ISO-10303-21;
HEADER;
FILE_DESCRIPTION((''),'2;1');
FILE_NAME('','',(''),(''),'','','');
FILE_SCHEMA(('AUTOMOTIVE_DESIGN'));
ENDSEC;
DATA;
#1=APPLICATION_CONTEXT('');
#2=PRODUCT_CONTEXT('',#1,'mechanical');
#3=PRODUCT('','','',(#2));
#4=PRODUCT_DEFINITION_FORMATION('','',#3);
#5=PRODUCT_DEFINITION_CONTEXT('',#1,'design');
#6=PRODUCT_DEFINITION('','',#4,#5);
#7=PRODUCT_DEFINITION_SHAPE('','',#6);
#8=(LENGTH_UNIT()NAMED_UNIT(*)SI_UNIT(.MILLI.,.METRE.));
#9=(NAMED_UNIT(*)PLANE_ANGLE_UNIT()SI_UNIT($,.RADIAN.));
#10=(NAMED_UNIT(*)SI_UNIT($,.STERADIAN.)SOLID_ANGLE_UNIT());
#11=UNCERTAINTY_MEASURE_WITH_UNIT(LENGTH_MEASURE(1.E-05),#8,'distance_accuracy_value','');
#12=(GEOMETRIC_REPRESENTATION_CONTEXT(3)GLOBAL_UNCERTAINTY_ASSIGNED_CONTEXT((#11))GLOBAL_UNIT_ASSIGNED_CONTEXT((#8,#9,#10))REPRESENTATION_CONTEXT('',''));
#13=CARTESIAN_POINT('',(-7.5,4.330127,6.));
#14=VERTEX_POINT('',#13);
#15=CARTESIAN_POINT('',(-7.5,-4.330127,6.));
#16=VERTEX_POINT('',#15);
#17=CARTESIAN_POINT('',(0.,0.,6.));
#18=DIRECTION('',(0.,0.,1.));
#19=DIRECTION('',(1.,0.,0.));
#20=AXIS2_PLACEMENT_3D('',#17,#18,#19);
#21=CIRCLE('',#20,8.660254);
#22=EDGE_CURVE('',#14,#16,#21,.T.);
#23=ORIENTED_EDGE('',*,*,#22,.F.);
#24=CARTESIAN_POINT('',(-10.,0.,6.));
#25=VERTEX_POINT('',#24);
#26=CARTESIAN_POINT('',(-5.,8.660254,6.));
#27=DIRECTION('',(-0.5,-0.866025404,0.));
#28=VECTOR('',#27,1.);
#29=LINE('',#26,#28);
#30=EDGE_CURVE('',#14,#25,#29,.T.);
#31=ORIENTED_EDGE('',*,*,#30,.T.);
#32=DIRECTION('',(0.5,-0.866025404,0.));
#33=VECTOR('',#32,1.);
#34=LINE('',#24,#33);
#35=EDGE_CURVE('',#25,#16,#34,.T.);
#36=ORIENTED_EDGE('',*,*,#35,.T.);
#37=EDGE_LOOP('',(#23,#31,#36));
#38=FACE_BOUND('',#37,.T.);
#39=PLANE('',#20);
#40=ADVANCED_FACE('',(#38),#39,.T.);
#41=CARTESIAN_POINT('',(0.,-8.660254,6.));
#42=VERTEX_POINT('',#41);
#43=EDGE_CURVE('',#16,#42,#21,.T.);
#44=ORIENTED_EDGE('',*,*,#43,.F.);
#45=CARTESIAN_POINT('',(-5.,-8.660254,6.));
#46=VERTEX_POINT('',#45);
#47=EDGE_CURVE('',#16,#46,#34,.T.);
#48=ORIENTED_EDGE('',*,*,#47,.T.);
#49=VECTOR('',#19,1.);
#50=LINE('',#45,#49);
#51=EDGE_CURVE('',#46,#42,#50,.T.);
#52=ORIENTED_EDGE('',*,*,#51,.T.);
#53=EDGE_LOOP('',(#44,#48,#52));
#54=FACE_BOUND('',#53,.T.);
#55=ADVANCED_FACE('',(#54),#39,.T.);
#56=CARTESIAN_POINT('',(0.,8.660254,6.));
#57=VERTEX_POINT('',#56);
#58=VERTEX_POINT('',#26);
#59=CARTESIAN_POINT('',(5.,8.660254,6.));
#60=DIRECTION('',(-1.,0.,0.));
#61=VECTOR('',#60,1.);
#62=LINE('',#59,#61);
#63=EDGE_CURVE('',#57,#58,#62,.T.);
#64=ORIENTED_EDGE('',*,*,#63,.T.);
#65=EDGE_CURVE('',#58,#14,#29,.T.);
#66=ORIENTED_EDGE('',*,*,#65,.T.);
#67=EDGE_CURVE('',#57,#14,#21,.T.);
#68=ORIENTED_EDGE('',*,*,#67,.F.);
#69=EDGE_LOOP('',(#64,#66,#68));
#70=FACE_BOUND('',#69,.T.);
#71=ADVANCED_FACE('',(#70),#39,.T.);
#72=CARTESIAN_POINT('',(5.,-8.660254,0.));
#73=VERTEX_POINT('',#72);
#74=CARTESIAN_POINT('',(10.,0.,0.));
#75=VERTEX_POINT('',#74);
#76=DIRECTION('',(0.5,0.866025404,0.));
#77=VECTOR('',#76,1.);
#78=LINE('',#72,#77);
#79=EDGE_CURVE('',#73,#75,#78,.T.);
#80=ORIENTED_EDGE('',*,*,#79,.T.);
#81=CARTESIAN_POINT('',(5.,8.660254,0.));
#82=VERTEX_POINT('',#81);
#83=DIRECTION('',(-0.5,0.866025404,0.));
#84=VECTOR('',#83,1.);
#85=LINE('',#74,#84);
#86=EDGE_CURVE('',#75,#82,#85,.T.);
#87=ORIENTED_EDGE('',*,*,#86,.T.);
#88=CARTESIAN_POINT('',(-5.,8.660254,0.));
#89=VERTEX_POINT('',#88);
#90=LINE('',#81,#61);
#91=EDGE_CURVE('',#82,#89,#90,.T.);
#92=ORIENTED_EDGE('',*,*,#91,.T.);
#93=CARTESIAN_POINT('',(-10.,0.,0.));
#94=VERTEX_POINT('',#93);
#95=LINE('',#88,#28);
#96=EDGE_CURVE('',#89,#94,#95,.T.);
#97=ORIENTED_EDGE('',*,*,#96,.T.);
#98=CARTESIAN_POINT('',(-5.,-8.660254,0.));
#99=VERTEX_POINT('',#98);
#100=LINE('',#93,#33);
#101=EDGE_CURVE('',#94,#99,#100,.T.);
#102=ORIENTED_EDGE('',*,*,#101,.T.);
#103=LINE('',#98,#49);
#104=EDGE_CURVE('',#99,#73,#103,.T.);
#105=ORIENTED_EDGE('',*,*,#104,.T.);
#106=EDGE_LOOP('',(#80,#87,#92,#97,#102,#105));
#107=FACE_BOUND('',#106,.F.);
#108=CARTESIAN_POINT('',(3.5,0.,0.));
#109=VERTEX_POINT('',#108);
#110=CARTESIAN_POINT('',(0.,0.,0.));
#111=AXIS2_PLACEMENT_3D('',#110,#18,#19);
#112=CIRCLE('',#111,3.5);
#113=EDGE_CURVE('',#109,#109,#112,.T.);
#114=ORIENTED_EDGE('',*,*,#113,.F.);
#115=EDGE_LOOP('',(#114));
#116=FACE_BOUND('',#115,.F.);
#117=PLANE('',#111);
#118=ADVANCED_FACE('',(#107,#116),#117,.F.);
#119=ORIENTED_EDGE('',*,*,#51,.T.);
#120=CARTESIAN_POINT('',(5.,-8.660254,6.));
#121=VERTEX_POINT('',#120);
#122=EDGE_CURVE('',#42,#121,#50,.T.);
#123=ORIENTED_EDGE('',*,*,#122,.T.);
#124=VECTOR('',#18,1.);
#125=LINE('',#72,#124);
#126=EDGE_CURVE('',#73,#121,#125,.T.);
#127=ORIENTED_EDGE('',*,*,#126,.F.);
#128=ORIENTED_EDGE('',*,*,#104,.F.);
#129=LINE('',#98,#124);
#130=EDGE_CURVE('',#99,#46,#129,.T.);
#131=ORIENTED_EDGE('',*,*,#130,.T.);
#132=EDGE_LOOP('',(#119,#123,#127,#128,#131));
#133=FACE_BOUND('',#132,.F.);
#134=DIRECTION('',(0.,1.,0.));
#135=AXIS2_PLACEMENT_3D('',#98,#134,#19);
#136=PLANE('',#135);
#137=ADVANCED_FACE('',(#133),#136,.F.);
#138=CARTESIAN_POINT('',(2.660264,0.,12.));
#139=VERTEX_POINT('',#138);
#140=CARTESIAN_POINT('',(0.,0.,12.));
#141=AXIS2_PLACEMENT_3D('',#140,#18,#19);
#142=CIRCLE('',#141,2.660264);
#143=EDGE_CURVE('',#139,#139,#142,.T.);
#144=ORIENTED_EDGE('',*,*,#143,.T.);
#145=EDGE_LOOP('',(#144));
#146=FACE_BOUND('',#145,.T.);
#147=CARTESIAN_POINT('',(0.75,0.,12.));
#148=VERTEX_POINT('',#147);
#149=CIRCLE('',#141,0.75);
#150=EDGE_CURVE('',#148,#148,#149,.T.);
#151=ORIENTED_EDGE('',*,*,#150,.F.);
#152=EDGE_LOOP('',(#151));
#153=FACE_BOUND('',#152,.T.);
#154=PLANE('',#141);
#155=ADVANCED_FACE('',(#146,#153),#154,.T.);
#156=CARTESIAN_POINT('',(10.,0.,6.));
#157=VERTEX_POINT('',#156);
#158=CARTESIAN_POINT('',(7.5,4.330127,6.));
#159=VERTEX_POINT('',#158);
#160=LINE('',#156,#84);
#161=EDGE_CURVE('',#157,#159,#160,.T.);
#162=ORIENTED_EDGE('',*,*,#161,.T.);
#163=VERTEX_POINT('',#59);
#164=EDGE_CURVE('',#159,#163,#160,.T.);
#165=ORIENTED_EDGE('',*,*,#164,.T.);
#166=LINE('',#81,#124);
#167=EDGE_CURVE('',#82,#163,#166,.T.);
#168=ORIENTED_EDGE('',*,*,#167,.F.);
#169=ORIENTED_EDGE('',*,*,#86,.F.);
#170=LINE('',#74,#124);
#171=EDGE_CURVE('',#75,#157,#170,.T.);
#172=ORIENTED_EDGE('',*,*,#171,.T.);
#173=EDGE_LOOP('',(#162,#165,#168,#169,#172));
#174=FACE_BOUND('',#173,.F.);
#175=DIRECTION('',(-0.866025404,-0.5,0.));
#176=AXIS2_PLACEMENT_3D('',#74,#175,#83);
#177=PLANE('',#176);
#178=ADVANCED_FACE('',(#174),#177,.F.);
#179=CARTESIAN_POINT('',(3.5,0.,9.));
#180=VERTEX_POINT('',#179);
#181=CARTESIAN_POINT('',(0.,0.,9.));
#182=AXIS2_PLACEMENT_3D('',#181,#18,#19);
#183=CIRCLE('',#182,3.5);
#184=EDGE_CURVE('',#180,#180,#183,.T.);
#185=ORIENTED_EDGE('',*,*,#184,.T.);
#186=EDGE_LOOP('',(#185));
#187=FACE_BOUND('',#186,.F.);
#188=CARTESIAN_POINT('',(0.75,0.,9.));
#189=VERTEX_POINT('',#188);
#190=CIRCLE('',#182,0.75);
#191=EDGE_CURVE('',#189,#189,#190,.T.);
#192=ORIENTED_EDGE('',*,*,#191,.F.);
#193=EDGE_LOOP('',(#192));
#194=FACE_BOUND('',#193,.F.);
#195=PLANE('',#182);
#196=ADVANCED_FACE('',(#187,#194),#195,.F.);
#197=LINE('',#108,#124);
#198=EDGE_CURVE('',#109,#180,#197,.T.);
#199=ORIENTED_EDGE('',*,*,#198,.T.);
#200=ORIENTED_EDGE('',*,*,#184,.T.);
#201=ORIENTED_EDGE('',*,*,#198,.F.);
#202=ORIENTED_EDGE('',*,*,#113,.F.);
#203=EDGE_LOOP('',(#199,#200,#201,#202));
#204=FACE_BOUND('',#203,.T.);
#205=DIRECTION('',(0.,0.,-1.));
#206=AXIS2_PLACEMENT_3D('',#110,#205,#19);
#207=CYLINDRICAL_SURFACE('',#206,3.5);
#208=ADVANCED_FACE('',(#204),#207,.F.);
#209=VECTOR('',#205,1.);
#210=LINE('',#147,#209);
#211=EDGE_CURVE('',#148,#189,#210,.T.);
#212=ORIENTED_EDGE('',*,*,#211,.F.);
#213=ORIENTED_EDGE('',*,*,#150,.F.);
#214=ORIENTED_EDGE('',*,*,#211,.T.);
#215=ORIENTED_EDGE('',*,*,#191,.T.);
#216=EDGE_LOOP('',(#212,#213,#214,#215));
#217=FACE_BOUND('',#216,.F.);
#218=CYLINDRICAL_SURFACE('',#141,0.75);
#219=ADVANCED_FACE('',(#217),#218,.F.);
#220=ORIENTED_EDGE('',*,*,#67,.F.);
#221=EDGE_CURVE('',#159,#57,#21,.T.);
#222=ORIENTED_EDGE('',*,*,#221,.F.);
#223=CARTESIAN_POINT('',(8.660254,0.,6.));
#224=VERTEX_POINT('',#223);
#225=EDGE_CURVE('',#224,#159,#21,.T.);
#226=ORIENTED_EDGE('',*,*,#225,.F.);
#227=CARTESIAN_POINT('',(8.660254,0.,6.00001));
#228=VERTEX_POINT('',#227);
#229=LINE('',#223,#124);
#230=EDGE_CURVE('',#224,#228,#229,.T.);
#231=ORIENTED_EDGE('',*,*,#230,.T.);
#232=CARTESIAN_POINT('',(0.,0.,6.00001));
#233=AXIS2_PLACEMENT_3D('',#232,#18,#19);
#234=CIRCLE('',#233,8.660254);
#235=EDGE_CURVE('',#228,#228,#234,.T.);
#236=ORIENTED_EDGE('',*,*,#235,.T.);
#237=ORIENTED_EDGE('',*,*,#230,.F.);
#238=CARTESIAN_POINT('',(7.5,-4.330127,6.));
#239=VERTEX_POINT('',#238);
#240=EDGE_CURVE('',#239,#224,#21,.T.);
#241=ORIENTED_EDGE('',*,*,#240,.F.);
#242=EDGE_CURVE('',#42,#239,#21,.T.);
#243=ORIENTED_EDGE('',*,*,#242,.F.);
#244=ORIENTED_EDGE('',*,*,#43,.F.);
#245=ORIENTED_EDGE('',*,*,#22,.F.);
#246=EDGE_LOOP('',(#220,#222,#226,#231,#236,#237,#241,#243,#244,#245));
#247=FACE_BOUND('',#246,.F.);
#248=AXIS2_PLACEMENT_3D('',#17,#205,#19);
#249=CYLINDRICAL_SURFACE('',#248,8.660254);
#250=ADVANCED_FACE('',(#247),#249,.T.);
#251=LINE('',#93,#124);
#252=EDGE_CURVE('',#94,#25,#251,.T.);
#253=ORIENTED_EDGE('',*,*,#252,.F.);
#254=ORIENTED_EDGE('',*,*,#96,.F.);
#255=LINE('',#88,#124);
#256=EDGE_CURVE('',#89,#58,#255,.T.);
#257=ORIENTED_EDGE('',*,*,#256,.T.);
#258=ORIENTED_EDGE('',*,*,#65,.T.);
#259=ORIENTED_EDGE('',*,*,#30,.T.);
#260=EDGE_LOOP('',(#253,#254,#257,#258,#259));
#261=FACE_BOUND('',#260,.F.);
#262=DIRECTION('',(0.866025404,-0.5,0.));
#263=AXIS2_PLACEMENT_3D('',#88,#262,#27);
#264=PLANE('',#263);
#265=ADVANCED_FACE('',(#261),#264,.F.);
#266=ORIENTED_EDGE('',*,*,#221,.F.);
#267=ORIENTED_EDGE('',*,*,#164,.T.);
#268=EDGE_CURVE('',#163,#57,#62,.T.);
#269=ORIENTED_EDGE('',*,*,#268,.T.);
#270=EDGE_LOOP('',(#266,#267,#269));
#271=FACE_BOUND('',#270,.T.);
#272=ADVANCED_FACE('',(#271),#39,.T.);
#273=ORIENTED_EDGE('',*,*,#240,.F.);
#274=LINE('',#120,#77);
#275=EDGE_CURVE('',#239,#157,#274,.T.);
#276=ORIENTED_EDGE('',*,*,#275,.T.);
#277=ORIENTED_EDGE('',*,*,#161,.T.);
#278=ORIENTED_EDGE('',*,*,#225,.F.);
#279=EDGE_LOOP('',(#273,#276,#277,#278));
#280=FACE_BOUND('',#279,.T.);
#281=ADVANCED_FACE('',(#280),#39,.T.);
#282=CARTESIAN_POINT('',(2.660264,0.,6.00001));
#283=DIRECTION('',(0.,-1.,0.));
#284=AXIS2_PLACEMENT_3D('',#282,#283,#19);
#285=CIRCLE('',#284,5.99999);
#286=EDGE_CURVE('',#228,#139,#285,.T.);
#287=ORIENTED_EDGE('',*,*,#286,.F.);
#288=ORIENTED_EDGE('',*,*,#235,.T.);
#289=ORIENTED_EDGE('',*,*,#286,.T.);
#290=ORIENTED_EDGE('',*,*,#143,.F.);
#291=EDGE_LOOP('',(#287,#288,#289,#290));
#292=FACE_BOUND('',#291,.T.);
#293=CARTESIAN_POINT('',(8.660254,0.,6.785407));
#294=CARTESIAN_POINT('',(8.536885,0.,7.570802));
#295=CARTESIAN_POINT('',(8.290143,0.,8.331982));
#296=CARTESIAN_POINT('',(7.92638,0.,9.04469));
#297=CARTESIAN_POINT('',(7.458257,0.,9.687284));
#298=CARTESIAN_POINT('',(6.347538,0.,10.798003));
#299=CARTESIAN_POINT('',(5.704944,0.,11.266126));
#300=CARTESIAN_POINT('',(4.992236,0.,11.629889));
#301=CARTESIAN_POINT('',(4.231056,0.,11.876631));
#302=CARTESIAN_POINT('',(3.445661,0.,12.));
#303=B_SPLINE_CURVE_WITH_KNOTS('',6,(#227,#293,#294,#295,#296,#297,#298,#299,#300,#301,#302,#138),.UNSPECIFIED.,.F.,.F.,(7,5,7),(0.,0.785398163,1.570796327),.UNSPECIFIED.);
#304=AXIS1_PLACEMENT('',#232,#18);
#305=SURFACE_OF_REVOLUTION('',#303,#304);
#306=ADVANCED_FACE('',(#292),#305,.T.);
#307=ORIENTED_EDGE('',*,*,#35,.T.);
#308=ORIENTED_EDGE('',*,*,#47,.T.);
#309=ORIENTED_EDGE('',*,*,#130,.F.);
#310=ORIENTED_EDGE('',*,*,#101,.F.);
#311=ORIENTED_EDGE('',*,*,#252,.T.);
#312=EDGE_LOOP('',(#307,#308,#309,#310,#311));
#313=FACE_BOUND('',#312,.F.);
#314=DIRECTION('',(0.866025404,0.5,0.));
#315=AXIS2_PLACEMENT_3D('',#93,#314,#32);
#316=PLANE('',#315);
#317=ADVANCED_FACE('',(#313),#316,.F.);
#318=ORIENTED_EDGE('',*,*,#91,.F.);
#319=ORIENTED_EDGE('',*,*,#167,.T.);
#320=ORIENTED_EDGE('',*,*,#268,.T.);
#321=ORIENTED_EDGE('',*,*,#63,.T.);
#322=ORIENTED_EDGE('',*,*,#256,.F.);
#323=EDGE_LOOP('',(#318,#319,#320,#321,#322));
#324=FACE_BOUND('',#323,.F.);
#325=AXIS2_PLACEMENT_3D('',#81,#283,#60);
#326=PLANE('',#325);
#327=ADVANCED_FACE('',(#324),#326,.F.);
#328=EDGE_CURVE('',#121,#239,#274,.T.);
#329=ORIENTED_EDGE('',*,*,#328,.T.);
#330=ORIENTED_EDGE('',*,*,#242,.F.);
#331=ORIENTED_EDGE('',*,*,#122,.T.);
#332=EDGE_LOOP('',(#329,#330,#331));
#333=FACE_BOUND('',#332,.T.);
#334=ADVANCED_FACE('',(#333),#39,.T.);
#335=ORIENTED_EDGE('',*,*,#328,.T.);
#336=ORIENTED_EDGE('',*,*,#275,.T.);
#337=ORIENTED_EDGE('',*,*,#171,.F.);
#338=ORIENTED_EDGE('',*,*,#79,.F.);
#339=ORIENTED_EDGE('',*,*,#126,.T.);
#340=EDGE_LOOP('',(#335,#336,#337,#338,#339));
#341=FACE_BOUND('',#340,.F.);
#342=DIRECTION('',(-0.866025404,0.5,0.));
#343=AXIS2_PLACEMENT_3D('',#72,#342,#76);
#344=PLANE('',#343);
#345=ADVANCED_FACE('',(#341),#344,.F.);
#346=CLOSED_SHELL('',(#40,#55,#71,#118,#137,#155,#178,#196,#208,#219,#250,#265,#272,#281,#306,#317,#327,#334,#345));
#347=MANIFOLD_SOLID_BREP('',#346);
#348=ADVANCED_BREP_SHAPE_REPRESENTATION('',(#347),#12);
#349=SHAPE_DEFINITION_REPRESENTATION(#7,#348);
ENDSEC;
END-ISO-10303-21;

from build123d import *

# Parameters (mm, degrees)
F0_R     = 3.5
F1_DEPTH = 6
F2_R     = 8.6602540378
F3_DEPTH = 6
F4_R     = 5.99999
F6_DEPTH = 3
F5_R     = 0.75
F7_DEPTH = 12.001


# Not quite as in the source:
# - a fillet or chamfer is up to 0.001 mm smaller than in the source, because OpenCascade refuses the exact size


with BuildPart() as f1:
    # F0 (on Top) → F1 (new body)
    with BuildSketch(Plane.XY):
        Polygon((5, 8.6602540378), (-5, 8.6602540378), (-10, 0), (-5, -8.6602540378), (5, -8.6602540378), (10, 0), align=None)
        Circle(F0_R, mode=Mode.SUBTRACT)
    extrude(amount=F1_DEPTH)

    # F2 (on face) → F3 (join)
    with BuildSketch(Plane.XY.offset(6)):
        Circle(F2_R)
    extrude(amount=F3_DEPTH)

    # F4 (radius 6 in the source; OpenCascade refuses exactly that, so slightly less here)
    f4_edges = [f1.edges().sort_by_distance(p)[0] for p in [
        (-8.660254, 0, 12),
    ]]
    fillet(f4_edges, radius=F4_R)

    # F6 (cut): a face of the model
    f6_faces = [f1.faces().sort_by_distance(p)[0] for p in [
        (0, 0, 6),
    ]]
    extrude(f6_faces, amount=-F6_DEPTH, mode=Mode.SUBTRACT)

    # F5 (on face) → F7 (cut, through all)
    with BuildSketch(Plane.XY.offset(12)):
        Circle(F5_R)
    extrude(amount=-F7_DEPTH, mode=Mode.SUBTRACT)


solid = f1.part
